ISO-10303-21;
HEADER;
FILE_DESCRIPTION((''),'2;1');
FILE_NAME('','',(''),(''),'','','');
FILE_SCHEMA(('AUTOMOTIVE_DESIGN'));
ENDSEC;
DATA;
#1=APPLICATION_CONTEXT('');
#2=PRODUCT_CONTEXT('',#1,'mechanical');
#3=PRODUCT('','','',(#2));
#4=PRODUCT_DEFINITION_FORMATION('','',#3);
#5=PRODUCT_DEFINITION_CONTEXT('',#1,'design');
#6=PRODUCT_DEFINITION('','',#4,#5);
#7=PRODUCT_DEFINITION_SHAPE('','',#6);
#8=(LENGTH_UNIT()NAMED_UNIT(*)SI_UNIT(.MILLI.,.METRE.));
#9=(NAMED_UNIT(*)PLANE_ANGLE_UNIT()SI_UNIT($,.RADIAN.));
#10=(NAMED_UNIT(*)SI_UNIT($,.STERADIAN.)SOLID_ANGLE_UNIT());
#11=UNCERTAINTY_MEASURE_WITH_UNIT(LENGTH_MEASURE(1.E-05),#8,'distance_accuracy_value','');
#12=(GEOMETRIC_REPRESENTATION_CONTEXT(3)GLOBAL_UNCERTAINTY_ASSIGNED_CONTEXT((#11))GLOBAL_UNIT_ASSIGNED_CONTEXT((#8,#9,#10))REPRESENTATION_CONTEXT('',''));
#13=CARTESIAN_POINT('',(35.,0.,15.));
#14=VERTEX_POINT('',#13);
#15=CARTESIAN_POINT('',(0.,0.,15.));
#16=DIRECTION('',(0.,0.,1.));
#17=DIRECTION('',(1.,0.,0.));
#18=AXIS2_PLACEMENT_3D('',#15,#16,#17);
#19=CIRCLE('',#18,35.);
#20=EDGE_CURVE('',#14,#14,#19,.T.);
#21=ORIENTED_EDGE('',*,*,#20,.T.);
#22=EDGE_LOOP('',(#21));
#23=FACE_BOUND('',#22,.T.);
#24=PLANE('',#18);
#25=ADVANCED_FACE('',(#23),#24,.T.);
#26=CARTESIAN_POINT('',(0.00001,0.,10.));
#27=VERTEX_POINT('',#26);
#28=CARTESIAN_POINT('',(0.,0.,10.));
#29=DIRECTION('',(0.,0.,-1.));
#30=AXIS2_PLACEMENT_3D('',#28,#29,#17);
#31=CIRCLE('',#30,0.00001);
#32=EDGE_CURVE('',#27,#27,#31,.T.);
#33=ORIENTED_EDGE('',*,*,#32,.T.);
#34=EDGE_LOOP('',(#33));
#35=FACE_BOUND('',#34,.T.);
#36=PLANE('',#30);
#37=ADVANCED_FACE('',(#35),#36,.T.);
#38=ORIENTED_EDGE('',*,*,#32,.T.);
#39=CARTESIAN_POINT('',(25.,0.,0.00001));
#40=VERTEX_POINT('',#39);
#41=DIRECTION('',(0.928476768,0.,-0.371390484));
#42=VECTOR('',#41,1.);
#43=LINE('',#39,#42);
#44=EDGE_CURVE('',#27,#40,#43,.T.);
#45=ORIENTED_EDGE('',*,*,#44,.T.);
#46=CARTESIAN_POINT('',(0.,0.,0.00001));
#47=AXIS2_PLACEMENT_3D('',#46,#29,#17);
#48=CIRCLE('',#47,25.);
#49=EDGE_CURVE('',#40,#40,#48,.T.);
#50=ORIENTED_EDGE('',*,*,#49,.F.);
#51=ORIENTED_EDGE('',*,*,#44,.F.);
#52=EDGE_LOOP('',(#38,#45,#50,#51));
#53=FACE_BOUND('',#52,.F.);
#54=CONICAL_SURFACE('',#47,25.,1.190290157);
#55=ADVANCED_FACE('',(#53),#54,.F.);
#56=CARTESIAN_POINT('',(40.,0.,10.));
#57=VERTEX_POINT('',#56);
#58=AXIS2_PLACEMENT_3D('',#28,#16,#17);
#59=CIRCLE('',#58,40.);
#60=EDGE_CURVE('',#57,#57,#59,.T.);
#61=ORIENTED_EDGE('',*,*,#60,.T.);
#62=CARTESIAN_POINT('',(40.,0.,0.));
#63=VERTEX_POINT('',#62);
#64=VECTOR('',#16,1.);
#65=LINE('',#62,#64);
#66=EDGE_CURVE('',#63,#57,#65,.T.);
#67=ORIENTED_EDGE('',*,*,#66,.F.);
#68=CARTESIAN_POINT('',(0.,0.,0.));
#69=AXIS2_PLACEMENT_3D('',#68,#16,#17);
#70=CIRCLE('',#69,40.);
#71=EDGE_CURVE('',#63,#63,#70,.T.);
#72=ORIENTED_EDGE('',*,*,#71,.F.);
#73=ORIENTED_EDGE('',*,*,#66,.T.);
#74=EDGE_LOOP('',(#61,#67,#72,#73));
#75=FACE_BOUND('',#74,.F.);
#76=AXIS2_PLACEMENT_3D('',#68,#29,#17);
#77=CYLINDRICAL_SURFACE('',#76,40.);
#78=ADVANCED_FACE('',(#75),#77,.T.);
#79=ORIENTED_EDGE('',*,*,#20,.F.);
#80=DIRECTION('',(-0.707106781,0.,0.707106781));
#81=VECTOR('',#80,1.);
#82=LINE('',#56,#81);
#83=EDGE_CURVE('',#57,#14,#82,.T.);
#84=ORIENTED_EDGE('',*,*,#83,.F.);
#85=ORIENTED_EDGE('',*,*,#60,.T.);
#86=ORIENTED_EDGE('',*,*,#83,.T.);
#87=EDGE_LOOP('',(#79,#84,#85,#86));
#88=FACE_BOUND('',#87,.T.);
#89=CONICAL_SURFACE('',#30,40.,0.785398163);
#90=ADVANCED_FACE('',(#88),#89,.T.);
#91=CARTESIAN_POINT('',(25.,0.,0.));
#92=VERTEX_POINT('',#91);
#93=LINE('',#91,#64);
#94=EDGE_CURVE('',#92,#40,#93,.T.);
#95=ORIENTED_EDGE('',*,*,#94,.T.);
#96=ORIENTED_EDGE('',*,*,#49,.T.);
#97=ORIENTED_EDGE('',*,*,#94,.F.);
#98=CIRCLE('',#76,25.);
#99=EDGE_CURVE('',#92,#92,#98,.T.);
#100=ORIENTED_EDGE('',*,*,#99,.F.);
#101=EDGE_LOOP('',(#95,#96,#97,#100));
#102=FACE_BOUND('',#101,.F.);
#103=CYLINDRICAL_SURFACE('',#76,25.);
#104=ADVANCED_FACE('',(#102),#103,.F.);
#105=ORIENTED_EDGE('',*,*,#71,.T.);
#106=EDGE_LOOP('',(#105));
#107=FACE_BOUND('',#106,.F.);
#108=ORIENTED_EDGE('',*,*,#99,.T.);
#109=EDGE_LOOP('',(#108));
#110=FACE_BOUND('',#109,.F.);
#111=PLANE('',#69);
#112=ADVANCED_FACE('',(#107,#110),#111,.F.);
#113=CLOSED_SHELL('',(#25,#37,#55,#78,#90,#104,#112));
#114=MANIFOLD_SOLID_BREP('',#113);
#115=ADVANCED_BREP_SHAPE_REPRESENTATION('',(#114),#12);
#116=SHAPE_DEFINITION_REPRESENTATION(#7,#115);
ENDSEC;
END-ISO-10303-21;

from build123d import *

# Parameters (mm, degrees)
F0_R     = 40
F1_DEPTH = 15
F2_SIZE  = 5
F3_R     = 25
F4_DEPTH = 10
F5_SIZE2 = 9.99999
F5_SIZE  = 24.99999


# Not quite as in the source:
# - a fillet or chamfer is up to 0.001 mm smaller than in the source, because OpenCascade refuses the exact size


with BuildPart() as f1:
    # F0 (on Top) → F1 (new body)
    with BuildSketch(Plane.XY):
        Circle(F0_R)
    extrude(amount=F1_DEPTH)

    # F2
    f2_edges = [f1.edges().sort_by_distance(p)[0] for p in [
        (-40, 0, 15),
    ]]
    chamfer(f2_edges, length=F2_SIZE)

    # F3 (on face) → F4 (cut)
    with BuildSketch(Plane(origin=(0, 0, 0), x_dir=(1, 0, 0), z_dir=(0, 0, -1))):
        Circle(F3_R)
    extrude(amount=-F4_DEPTH, mode=Mode.SUBTRACT)

    # F5 (size 25 and 10 in the source; OpenCascade refuses exactly that, so slightly less here)
    f5_edges = [f1.edges().sort_by_distance(p)[0] for p in [
        (-25, 0, 10),
    ]]
    f5_side = f1.faces().sort_by_distance((0, 0, 10))[0]
    chamfer(f5_edges, length=F5_SIZE, length2=F5_SIZE2, reference=f5_side)


solid = f1.part
